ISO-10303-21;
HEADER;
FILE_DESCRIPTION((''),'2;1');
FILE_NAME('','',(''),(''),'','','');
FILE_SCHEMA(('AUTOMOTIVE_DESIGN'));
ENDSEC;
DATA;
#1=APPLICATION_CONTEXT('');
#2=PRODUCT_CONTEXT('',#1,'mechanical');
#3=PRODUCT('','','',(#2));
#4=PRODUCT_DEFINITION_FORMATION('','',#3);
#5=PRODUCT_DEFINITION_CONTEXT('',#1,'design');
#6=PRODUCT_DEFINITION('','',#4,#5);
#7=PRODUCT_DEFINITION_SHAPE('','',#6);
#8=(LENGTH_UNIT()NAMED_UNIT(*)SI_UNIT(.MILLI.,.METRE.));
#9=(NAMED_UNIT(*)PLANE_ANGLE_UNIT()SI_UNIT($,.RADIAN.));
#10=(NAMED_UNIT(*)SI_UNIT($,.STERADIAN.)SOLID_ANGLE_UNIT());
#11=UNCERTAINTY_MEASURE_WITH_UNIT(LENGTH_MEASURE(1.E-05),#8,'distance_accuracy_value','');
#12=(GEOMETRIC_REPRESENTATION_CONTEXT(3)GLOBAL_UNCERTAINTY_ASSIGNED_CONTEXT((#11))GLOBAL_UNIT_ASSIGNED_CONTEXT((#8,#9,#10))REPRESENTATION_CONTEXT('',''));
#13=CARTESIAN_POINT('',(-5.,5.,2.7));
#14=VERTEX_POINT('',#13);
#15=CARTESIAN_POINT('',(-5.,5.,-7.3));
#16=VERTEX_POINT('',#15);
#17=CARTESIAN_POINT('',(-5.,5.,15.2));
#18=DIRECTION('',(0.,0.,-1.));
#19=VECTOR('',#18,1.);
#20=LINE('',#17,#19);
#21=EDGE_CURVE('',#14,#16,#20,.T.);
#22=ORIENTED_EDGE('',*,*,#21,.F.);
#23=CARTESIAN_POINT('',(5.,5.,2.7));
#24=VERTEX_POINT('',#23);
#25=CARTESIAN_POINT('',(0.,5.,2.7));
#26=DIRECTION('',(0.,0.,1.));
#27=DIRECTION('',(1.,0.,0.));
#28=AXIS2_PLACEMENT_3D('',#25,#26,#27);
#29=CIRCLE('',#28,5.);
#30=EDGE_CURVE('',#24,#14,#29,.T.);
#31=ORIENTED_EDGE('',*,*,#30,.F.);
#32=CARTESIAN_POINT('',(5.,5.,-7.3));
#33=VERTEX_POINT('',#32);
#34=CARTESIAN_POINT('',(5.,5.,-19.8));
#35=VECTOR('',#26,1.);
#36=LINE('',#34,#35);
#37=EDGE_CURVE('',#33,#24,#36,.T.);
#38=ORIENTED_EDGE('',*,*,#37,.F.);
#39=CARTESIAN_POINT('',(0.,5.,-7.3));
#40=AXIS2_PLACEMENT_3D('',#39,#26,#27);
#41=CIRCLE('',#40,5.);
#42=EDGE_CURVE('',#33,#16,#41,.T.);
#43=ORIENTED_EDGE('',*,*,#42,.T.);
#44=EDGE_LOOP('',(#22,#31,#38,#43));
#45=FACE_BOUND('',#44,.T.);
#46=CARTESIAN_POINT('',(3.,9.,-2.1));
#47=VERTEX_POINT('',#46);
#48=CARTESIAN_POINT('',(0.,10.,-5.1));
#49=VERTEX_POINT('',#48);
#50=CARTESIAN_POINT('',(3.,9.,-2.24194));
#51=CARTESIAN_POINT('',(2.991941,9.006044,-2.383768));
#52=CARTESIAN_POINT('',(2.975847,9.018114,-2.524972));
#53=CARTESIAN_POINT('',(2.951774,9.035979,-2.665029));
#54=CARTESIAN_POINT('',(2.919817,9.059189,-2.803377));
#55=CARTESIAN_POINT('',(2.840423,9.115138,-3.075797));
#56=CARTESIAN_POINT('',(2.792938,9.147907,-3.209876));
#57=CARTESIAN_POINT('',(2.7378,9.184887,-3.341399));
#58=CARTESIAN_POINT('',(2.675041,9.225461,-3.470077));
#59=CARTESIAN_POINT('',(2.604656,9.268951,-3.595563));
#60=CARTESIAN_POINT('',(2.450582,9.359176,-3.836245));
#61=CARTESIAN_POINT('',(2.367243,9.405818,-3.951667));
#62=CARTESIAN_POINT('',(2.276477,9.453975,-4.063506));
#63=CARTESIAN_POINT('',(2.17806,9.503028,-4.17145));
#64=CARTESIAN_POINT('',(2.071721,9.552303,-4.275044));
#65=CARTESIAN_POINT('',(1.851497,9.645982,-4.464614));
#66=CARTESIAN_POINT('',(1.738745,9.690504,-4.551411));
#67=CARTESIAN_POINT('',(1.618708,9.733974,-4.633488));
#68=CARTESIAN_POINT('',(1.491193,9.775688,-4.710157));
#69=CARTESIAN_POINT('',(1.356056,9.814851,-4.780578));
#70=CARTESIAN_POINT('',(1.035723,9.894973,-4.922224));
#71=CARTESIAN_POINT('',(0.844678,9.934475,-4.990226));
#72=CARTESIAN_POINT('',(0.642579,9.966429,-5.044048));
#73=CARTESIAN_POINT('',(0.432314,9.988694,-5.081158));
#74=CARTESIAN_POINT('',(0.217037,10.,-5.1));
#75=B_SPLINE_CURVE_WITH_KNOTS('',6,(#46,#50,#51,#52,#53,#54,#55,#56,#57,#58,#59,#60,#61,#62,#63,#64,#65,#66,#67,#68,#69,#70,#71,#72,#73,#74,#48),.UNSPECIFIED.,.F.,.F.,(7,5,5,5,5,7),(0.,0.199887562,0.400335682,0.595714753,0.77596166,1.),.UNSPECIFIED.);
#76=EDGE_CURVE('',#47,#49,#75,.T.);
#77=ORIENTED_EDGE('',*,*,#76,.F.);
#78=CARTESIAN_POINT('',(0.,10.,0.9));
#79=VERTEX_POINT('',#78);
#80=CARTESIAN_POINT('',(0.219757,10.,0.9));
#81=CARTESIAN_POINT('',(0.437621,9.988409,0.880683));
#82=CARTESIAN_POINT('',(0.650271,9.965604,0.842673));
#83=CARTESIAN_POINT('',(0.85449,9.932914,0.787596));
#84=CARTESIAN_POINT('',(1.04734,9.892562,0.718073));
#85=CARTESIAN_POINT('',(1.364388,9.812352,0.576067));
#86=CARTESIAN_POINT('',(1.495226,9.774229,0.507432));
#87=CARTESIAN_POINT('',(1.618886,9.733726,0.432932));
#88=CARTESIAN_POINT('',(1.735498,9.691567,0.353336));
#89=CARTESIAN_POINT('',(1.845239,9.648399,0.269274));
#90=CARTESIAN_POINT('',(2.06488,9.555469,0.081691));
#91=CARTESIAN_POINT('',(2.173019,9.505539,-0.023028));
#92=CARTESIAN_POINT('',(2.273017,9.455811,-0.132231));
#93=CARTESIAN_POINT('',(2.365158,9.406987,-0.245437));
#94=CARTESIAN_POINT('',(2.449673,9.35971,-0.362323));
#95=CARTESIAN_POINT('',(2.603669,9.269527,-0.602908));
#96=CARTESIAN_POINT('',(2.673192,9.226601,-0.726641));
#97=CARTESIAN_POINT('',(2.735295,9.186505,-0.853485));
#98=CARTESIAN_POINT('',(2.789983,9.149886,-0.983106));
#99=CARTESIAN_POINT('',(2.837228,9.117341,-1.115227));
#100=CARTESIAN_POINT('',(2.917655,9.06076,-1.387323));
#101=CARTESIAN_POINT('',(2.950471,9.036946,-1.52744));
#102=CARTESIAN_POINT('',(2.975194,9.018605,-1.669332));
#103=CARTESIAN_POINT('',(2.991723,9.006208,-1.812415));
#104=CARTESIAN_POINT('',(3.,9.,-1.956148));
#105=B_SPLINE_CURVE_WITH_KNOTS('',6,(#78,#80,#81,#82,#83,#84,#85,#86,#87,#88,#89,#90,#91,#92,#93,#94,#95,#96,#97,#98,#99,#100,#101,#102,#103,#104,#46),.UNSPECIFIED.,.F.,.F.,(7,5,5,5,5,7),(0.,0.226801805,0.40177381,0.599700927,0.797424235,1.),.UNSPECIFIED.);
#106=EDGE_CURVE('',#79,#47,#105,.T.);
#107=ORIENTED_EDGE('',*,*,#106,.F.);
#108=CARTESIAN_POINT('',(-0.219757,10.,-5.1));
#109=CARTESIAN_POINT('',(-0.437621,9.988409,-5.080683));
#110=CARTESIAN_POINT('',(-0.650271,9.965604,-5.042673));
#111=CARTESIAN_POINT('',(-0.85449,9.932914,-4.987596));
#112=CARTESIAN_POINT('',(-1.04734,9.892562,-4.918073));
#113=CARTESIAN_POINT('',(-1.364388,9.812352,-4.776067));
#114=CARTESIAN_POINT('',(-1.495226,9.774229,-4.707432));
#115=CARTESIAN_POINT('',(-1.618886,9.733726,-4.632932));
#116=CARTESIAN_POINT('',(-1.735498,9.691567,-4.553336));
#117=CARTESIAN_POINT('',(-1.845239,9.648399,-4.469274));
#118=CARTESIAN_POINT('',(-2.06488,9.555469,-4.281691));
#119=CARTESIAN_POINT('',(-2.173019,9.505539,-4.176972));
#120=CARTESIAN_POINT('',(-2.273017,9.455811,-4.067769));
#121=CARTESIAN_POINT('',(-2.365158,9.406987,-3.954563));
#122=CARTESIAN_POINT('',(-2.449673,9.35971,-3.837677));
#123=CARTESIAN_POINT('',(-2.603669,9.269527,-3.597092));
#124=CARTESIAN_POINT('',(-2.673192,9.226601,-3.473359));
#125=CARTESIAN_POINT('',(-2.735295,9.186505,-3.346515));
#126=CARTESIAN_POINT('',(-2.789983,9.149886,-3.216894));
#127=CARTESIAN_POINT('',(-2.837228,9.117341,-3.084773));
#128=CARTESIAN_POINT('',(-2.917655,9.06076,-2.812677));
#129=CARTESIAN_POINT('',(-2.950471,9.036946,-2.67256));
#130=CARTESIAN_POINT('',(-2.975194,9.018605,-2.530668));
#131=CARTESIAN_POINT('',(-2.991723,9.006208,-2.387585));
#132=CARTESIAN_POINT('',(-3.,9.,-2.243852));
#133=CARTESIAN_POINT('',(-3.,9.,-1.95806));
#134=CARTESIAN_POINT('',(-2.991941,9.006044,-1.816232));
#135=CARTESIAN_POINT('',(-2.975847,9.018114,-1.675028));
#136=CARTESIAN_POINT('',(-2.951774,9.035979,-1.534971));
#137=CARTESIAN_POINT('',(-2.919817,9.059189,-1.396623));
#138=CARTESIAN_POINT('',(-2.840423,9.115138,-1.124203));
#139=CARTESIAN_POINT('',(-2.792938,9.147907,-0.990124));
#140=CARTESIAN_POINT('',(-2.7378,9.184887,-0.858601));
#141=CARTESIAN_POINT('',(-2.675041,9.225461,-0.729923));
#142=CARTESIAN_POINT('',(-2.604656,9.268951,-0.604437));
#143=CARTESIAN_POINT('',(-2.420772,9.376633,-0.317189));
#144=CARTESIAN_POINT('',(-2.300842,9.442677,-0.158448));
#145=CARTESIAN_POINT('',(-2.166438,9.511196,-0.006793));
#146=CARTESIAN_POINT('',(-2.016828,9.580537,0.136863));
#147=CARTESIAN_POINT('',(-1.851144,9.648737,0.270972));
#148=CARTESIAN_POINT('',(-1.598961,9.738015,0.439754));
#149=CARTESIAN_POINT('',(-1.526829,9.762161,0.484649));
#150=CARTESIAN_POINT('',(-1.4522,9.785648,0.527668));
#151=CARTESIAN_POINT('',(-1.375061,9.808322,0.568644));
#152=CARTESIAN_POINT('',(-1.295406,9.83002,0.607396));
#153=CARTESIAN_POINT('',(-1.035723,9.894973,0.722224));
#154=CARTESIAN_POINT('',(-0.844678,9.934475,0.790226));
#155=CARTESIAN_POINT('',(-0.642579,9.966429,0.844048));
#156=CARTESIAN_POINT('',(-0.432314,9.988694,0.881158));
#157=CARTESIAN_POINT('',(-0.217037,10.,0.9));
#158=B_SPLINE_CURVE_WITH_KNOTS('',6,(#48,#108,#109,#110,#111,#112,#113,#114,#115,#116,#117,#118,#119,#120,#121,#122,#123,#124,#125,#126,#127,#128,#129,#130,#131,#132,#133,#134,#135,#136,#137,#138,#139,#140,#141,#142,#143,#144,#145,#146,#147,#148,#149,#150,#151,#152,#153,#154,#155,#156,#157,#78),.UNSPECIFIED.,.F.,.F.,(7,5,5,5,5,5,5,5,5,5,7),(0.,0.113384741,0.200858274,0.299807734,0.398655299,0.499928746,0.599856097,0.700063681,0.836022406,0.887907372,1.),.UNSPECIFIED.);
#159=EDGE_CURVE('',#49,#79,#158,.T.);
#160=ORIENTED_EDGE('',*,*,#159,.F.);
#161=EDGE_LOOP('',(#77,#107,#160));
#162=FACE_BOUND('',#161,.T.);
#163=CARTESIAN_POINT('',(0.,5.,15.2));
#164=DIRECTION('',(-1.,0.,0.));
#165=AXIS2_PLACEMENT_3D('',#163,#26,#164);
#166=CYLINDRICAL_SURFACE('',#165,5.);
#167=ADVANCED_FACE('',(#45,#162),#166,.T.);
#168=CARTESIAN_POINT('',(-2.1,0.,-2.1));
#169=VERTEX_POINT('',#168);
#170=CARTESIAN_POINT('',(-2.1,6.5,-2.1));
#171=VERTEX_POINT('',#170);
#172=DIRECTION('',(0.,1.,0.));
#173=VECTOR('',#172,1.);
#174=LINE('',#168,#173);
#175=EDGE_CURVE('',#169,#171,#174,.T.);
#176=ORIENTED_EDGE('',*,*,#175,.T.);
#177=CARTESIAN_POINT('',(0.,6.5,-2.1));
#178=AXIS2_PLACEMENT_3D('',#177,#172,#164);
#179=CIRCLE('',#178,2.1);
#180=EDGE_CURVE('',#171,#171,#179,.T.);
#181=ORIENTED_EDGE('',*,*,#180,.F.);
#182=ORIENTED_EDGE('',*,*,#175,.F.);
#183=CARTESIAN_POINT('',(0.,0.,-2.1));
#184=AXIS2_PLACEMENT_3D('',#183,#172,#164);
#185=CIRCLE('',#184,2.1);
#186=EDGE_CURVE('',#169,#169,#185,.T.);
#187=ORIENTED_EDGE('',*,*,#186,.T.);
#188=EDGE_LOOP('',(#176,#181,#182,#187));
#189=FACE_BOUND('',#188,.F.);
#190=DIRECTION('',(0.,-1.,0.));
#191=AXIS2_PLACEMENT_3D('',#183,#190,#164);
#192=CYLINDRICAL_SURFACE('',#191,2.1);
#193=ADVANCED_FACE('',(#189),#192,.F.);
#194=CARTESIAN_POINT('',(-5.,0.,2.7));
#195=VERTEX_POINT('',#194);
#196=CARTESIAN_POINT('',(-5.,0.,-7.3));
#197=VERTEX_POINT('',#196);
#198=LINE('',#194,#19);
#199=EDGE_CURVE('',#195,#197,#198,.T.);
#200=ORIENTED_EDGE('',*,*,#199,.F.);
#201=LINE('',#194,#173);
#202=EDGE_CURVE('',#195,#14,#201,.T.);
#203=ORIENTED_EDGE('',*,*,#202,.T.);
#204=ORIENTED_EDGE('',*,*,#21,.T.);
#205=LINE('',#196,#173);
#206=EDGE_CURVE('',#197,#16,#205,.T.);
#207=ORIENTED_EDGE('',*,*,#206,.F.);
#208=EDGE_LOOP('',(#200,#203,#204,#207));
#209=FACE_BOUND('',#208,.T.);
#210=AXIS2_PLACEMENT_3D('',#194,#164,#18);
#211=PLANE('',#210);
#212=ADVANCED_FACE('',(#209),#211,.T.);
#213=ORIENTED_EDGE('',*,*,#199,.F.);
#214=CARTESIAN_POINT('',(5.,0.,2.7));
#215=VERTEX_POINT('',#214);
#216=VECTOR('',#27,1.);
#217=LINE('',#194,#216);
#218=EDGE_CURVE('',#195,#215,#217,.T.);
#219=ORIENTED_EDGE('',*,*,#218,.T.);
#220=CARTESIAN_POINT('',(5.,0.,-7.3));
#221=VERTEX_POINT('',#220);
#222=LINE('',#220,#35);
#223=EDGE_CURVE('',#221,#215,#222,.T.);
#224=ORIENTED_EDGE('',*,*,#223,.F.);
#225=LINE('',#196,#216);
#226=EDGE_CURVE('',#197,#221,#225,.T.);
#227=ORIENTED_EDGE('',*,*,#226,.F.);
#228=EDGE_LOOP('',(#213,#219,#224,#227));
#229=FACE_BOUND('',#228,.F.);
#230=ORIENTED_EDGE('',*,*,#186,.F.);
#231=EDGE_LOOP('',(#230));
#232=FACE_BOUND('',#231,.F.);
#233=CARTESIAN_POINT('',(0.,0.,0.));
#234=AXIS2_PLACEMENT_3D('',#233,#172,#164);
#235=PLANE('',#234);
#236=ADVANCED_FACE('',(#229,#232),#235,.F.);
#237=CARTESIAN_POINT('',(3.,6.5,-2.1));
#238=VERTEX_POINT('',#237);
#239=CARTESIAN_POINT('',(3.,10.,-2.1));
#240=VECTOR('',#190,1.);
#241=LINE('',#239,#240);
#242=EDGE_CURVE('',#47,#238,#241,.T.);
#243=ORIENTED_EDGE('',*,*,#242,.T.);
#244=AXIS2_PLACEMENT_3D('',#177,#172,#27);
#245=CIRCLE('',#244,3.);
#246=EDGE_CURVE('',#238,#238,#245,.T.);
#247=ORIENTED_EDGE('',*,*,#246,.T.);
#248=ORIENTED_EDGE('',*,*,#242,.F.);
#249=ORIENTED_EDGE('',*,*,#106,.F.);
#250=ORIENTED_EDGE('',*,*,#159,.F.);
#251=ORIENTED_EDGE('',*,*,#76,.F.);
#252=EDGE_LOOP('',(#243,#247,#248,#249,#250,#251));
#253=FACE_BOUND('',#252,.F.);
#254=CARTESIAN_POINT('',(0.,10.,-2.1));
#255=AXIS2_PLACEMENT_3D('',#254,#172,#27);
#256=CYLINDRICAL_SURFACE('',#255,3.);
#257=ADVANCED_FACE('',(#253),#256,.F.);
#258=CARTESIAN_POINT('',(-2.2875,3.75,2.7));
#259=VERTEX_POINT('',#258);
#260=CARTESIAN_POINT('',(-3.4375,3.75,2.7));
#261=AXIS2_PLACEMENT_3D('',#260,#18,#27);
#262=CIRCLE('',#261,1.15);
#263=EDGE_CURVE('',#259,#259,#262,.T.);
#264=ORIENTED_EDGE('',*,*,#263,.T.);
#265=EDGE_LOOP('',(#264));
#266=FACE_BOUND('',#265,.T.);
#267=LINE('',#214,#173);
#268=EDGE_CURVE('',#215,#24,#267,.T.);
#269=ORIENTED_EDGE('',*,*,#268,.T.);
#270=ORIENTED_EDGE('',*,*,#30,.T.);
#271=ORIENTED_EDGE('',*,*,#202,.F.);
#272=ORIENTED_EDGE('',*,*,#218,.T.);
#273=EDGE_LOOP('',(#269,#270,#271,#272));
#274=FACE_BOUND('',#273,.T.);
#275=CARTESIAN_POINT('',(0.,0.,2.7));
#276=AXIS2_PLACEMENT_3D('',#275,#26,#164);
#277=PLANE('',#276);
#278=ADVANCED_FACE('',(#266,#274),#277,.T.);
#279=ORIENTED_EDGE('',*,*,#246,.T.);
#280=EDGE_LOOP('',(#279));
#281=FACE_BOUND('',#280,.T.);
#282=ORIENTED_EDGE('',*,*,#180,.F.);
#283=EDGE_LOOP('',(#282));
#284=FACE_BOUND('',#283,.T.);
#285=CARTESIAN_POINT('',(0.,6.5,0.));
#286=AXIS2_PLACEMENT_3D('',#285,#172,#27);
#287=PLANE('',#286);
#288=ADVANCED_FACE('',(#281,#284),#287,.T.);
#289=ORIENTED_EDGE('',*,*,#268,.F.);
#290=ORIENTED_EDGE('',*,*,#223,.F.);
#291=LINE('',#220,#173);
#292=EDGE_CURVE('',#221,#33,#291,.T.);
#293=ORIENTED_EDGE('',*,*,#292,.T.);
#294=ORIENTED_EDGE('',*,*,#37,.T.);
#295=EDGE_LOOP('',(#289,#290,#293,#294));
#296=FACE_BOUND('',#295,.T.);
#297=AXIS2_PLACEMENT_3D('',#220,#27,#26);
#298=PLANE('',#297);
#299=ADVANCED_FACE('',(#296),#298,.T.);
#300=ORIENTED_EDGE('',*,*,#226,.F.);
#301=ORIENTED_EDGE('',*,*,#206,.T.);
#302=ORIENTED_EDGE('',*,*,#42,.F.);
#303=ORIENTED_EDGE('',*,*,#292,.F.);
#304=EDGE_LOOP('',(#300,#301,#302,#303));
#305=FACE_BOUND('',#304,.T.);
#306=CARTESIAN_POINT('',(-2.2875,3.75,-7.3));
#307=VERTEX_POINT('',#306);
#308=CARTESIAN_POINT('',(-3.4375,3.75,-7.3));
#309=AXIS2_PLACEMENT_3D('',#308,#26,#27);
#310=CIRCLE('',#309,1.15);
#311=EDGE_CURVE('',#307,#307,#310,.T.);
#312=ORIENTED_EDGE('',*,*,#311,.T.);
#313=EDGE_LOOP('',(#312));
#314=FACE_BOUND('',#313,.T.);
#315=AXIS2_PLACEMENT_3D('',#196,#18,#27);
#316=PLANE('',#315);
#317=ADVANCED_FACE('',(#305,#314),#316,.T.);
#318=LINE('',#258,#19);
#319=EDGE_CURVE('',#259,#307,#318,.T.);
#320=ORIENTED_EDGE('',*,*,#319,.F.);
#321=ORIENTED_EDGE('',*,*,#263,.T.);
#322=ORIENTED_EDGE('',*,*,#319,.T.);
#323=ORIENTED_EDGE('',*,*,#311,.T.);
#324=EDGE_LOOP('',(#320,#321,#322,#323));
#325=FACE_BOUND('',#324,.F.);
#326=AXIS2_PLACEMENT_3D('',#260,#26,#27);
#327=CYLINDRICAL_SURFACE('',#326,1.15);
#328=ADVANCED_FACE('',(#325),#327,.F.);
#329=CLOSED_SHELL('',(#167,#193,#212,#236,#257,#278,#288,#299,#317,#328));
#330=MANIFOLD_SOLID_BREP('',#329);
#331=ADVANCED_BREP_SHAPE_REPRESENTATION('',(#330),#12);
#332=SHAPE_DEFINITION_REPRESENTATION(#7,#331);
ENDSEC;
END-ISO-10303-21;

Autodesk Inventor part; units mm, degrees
ref_plane "YZ Plane" through (0, 0, 0) normal (1, 0, 0) x (0, 1, 0)
ref_plane "XZ Plane" through (0, 0, 0) normal (0, 1, 0) x (-1, 0, 0)
ref_plane "XY Plane" through (0, 0, 0) normal (0, 0, 1) x (1, 0, 0)
sketch "Sketch1" plane through (0, 0, 0) normal (0, 1, 0) x (-1, 0, 0)
  line L0 (0, 0) -> (0, -4.2)
  circle A0 centre (0, -2.1) radius 2.1
  line L1 (0, -2.1) -> (0, -6.9)
  line L2 (0, -6.9) -> (0, 2.7)
  line L3 (0, 2.7) -> (5, 2.7)
  line L4 (5, 2.7) -> (5, -7.3)
  line L5 (5, -7.3) -> (-5, -7.3)
  line L6 (-5, -7.3) -> (-5, 2.7)
  line L7 (-5, 2.7) -> (0, 2.7)
  dimension "d0" = 4.2
  dimension "d1" = 4.8
  dimension "d2" = 9.6
  dimension "d3" = 5
  dimension "d4" = 10
extrude "Extrusion1" add sketch "Sketch1" along normal blind 10
sketch "Sketch2" plane through (0, 10, 0) normal (0, 1, 0) x (1, 0, 0)
  circle A0 centre (0, 2.1) radius 2.1 projected
  circle A1 centre (0, 2.1) radius 3
  point P0 (0, 0)
  dimension "d7" = 6
extrude "Extrusion2" cut sketch "Sketch2" against normal blind 3.5 contours A0 | A1
fillet "Fillet1" radius 5 2 edges at (5, 10, -2.3) (-5, 10, -2.3)
sketch "Sketch3" plane through (-5, 0, 2.7) normal (0, 0, 1) x (1, 0, 0)
  arc A0 (10, 5) -> (0, 5) centre (5, 5) ccw projected
  line L0 (5, 5) -> (5, 10)
  line L1 (5, 5) -> (5, 0)
  line L2 (5, 0) -> (5, 5)
  line L3 (0, 0) -> (0, 5) projected
  line L4 (5, 5) -> (0, 5)
  line L5 (0, 5) -> (2.5, 5)
  line L6 (2.5, 5) -> (2.5, 0)
  line L7 (2.5, 0) -> (2.5, 2.5)
  line L8 (1.25, 5) -> (1.25, 0)
  line L9 (0, 0) -> (10, 0) projected
  line L10 (2.5, 2.5) -> (1.25, 2.5)
  line L11 (1.875, 5) -> (1.875, 2.5)
  circle A1 centre (1.875, 2.5) radius 1.15
  line L12 (1.25, 5) -> (1.875, 5)
  line L13 (1.5625, 5) -> (1.5625, 2.5)
  line L14 (1.5625, 2.5) -> (1.5625, 3.75)
  circle A2 centre (1.5625, 3.75) radius 1.15
  line L15 (1.5625, 3.75) -> (0.4125, 3.75)
  line L16 (0.4125, 3.75) -> (0, 3.75)
  dimension "d14" = 2.3
extrude "Extrusion3" cut sketch "Sketch3" against normal through all contours L15 L8 A1 A2 | A2 L8 L15 | A2 L13 L15 L8 | A2 A1 L6 | L6 A1 L11 A2 | A1 L8 A2 | L15 L13 A1 L8 | A2 L11 A1 L13 | A1 A2 L6 | L6 A2 L11 A1 | A1 L13 A2 L8 | L11 A2 L13 A1 picked at (2.5388, 4.0306) picked at (1.186, 3.1393) picked at (2.5186, 3.2399)
properties part number "pist"
